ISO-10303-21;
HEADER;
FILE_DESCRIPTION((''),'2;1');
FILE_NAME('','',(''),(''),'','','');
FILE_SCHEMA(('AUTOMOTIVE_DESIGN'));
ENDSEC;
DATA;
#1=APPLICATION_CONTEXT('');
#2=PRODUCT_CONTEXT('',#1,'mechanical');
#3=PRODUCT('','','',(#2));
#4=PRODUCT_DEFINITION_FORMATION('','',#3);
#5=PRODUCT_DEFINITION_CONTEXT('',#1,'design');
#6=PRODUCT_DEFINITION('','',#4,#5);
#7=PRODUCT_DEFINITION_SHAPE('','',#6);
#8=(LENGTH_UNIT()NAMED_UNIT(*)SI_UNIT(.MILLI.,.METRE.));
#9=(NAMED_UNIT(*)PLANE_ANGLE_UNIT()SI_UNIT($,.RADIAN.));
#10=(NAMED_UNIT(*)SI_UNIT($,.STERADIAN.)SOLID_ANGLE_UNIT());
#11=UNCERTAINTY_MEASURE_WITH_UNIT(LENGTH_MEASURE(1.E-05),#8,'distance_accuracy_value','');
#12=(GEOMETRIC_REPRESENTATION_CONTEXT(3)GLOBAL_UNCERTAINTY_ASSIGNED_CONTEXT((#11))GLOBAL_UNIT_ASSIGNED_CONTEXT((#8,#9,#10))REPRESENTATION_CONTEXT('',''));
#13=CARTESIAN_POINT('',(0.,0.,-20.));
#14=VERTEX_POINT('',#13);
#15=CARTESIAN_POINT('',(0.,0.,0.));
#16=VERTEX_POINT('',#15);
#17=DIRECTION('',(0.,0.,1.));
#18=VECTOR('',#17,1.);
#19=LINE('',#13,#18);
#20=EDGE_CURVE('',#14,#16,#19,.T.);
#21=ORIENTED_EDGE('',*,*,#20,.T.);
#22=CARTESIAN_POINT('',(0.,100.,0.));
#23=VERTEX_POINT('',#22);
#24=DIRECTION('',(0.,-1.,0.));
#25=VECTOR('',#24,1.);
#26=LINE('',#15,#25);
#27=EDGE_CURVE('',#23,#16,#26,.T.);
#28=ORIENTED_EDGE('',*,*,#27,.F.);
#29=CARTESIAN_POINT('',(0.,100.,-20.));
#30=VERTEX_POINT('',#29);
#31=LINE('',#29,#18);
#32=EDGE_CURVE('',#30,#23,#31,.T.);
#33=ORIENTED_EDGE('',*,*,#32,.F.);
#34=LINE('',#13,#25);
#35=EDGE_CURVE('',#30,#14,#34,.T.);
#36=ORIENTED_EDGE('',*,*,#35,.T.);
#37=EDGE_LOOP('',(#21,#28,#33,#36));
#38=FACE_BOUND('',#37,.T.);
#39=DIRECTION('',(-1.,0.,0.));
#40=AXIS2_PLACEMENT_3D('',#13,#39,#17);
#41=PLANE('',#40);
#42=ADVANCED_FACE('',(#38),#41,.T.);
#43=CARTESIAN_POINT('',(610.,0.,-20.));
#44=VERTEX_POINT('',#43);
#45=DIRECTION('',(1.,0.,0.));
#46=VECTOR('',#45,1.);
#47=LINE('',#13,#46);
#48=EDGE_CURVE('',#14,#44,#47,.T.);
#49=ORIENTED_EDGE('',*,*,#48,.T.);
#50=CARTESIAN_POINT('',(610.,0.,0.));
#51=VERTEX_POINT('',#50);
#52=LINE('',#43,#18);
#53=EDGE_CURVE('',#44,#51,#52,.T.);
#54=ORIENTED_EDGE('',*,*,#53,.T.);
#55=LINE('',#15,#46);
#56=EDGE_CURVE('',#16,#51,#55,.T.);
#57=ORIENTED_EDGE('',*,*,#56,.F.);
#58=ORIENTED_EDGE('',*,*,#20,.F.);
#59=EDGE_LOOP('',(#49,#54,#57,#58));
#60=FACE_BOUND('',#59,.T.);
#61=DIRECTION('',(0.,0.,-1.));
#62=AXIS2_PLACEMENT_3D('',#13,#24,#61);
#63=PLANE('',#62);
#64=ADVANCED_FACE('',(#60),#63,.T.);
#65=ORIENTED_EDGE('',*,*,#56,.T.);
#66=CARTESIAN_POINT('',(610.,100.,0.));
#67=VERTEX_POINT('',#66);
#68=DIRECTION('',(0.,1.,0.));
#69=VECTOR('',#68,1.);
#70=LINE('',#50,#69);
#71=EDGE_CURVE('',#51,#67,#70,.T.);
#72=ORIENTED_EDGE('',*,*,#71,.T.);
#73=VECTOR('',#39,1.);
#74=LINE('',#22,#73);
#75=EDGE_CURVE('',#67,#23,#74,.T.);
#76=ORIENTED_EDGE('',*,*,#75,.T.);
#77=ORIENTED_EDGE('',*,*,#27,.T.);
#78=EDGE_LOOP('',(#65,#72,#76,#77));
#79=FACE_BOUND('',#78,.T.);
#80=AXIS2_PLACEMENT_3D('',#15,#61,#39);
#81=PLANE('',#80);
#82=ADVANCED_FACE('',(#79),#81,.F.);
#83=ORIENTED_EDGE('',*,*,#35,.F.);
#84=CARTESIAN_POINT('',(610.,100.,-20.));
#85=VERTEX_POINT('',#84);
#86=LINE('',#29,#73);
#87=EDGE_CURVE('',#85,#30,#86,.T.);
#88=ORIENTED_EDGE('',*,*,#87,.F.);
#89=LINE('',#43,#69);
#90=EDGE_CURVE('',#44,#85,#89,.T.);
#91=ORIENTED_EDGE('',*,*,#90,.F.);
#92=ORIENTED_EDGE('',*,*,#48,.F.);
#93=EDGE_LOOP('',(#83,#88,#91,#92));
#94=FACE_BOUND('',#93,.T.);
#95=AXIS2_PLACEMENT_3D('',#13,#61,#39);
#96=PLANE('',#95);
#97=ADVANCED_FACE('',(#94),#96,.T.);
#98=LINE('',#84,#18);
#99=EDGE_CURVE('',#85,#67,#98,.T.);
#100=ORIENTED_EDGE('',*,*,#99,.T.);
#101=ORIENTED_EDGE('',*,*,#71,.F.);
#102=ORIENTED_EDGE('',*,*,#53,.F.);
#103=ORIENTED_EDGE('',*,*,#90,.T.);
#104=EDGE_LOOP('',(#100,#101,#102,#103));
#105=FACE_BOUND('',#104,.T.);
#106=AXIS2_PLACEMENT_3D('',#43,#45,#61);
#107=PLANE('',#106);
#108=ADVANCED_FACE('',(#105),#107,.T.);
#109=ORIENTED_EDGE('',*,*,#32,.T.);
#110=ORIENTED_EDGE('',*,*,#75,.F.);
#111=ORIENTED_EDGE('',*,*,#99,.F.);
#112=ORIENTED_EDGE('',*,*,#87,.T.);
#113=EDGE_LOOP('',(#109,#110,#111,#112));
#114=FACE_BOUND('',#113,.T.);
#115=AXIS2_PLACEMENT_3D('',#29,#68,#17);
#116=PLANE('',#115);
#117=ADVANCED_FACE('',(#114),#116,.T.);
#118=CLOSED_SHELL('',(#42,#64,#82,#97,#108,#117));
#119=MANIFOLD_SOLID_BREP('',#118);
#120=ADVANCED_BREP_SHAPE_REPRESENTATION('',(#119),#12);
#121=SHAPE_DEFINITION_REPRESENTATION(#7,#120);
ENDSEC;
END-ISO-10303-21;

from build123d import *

# Parameters (mm, degrees)
IZIM1_W            = 610
IZIM1_H            = 100
TABAN_FLAN_1_DEPTH = 20


# Sheet-metal steps are written as plain solids
with BuildPart() as part:
    # Çizim1 → Taban-Flanş1 (new body)
    with BuildSketch(Plane.XY):
        with Locations((305, 50)):
            Rectangle(IZIM1_W, IZIM1_H)
    extrude(amount=-TABAN_FLAN_1_DEPTH)


solid = part.part
